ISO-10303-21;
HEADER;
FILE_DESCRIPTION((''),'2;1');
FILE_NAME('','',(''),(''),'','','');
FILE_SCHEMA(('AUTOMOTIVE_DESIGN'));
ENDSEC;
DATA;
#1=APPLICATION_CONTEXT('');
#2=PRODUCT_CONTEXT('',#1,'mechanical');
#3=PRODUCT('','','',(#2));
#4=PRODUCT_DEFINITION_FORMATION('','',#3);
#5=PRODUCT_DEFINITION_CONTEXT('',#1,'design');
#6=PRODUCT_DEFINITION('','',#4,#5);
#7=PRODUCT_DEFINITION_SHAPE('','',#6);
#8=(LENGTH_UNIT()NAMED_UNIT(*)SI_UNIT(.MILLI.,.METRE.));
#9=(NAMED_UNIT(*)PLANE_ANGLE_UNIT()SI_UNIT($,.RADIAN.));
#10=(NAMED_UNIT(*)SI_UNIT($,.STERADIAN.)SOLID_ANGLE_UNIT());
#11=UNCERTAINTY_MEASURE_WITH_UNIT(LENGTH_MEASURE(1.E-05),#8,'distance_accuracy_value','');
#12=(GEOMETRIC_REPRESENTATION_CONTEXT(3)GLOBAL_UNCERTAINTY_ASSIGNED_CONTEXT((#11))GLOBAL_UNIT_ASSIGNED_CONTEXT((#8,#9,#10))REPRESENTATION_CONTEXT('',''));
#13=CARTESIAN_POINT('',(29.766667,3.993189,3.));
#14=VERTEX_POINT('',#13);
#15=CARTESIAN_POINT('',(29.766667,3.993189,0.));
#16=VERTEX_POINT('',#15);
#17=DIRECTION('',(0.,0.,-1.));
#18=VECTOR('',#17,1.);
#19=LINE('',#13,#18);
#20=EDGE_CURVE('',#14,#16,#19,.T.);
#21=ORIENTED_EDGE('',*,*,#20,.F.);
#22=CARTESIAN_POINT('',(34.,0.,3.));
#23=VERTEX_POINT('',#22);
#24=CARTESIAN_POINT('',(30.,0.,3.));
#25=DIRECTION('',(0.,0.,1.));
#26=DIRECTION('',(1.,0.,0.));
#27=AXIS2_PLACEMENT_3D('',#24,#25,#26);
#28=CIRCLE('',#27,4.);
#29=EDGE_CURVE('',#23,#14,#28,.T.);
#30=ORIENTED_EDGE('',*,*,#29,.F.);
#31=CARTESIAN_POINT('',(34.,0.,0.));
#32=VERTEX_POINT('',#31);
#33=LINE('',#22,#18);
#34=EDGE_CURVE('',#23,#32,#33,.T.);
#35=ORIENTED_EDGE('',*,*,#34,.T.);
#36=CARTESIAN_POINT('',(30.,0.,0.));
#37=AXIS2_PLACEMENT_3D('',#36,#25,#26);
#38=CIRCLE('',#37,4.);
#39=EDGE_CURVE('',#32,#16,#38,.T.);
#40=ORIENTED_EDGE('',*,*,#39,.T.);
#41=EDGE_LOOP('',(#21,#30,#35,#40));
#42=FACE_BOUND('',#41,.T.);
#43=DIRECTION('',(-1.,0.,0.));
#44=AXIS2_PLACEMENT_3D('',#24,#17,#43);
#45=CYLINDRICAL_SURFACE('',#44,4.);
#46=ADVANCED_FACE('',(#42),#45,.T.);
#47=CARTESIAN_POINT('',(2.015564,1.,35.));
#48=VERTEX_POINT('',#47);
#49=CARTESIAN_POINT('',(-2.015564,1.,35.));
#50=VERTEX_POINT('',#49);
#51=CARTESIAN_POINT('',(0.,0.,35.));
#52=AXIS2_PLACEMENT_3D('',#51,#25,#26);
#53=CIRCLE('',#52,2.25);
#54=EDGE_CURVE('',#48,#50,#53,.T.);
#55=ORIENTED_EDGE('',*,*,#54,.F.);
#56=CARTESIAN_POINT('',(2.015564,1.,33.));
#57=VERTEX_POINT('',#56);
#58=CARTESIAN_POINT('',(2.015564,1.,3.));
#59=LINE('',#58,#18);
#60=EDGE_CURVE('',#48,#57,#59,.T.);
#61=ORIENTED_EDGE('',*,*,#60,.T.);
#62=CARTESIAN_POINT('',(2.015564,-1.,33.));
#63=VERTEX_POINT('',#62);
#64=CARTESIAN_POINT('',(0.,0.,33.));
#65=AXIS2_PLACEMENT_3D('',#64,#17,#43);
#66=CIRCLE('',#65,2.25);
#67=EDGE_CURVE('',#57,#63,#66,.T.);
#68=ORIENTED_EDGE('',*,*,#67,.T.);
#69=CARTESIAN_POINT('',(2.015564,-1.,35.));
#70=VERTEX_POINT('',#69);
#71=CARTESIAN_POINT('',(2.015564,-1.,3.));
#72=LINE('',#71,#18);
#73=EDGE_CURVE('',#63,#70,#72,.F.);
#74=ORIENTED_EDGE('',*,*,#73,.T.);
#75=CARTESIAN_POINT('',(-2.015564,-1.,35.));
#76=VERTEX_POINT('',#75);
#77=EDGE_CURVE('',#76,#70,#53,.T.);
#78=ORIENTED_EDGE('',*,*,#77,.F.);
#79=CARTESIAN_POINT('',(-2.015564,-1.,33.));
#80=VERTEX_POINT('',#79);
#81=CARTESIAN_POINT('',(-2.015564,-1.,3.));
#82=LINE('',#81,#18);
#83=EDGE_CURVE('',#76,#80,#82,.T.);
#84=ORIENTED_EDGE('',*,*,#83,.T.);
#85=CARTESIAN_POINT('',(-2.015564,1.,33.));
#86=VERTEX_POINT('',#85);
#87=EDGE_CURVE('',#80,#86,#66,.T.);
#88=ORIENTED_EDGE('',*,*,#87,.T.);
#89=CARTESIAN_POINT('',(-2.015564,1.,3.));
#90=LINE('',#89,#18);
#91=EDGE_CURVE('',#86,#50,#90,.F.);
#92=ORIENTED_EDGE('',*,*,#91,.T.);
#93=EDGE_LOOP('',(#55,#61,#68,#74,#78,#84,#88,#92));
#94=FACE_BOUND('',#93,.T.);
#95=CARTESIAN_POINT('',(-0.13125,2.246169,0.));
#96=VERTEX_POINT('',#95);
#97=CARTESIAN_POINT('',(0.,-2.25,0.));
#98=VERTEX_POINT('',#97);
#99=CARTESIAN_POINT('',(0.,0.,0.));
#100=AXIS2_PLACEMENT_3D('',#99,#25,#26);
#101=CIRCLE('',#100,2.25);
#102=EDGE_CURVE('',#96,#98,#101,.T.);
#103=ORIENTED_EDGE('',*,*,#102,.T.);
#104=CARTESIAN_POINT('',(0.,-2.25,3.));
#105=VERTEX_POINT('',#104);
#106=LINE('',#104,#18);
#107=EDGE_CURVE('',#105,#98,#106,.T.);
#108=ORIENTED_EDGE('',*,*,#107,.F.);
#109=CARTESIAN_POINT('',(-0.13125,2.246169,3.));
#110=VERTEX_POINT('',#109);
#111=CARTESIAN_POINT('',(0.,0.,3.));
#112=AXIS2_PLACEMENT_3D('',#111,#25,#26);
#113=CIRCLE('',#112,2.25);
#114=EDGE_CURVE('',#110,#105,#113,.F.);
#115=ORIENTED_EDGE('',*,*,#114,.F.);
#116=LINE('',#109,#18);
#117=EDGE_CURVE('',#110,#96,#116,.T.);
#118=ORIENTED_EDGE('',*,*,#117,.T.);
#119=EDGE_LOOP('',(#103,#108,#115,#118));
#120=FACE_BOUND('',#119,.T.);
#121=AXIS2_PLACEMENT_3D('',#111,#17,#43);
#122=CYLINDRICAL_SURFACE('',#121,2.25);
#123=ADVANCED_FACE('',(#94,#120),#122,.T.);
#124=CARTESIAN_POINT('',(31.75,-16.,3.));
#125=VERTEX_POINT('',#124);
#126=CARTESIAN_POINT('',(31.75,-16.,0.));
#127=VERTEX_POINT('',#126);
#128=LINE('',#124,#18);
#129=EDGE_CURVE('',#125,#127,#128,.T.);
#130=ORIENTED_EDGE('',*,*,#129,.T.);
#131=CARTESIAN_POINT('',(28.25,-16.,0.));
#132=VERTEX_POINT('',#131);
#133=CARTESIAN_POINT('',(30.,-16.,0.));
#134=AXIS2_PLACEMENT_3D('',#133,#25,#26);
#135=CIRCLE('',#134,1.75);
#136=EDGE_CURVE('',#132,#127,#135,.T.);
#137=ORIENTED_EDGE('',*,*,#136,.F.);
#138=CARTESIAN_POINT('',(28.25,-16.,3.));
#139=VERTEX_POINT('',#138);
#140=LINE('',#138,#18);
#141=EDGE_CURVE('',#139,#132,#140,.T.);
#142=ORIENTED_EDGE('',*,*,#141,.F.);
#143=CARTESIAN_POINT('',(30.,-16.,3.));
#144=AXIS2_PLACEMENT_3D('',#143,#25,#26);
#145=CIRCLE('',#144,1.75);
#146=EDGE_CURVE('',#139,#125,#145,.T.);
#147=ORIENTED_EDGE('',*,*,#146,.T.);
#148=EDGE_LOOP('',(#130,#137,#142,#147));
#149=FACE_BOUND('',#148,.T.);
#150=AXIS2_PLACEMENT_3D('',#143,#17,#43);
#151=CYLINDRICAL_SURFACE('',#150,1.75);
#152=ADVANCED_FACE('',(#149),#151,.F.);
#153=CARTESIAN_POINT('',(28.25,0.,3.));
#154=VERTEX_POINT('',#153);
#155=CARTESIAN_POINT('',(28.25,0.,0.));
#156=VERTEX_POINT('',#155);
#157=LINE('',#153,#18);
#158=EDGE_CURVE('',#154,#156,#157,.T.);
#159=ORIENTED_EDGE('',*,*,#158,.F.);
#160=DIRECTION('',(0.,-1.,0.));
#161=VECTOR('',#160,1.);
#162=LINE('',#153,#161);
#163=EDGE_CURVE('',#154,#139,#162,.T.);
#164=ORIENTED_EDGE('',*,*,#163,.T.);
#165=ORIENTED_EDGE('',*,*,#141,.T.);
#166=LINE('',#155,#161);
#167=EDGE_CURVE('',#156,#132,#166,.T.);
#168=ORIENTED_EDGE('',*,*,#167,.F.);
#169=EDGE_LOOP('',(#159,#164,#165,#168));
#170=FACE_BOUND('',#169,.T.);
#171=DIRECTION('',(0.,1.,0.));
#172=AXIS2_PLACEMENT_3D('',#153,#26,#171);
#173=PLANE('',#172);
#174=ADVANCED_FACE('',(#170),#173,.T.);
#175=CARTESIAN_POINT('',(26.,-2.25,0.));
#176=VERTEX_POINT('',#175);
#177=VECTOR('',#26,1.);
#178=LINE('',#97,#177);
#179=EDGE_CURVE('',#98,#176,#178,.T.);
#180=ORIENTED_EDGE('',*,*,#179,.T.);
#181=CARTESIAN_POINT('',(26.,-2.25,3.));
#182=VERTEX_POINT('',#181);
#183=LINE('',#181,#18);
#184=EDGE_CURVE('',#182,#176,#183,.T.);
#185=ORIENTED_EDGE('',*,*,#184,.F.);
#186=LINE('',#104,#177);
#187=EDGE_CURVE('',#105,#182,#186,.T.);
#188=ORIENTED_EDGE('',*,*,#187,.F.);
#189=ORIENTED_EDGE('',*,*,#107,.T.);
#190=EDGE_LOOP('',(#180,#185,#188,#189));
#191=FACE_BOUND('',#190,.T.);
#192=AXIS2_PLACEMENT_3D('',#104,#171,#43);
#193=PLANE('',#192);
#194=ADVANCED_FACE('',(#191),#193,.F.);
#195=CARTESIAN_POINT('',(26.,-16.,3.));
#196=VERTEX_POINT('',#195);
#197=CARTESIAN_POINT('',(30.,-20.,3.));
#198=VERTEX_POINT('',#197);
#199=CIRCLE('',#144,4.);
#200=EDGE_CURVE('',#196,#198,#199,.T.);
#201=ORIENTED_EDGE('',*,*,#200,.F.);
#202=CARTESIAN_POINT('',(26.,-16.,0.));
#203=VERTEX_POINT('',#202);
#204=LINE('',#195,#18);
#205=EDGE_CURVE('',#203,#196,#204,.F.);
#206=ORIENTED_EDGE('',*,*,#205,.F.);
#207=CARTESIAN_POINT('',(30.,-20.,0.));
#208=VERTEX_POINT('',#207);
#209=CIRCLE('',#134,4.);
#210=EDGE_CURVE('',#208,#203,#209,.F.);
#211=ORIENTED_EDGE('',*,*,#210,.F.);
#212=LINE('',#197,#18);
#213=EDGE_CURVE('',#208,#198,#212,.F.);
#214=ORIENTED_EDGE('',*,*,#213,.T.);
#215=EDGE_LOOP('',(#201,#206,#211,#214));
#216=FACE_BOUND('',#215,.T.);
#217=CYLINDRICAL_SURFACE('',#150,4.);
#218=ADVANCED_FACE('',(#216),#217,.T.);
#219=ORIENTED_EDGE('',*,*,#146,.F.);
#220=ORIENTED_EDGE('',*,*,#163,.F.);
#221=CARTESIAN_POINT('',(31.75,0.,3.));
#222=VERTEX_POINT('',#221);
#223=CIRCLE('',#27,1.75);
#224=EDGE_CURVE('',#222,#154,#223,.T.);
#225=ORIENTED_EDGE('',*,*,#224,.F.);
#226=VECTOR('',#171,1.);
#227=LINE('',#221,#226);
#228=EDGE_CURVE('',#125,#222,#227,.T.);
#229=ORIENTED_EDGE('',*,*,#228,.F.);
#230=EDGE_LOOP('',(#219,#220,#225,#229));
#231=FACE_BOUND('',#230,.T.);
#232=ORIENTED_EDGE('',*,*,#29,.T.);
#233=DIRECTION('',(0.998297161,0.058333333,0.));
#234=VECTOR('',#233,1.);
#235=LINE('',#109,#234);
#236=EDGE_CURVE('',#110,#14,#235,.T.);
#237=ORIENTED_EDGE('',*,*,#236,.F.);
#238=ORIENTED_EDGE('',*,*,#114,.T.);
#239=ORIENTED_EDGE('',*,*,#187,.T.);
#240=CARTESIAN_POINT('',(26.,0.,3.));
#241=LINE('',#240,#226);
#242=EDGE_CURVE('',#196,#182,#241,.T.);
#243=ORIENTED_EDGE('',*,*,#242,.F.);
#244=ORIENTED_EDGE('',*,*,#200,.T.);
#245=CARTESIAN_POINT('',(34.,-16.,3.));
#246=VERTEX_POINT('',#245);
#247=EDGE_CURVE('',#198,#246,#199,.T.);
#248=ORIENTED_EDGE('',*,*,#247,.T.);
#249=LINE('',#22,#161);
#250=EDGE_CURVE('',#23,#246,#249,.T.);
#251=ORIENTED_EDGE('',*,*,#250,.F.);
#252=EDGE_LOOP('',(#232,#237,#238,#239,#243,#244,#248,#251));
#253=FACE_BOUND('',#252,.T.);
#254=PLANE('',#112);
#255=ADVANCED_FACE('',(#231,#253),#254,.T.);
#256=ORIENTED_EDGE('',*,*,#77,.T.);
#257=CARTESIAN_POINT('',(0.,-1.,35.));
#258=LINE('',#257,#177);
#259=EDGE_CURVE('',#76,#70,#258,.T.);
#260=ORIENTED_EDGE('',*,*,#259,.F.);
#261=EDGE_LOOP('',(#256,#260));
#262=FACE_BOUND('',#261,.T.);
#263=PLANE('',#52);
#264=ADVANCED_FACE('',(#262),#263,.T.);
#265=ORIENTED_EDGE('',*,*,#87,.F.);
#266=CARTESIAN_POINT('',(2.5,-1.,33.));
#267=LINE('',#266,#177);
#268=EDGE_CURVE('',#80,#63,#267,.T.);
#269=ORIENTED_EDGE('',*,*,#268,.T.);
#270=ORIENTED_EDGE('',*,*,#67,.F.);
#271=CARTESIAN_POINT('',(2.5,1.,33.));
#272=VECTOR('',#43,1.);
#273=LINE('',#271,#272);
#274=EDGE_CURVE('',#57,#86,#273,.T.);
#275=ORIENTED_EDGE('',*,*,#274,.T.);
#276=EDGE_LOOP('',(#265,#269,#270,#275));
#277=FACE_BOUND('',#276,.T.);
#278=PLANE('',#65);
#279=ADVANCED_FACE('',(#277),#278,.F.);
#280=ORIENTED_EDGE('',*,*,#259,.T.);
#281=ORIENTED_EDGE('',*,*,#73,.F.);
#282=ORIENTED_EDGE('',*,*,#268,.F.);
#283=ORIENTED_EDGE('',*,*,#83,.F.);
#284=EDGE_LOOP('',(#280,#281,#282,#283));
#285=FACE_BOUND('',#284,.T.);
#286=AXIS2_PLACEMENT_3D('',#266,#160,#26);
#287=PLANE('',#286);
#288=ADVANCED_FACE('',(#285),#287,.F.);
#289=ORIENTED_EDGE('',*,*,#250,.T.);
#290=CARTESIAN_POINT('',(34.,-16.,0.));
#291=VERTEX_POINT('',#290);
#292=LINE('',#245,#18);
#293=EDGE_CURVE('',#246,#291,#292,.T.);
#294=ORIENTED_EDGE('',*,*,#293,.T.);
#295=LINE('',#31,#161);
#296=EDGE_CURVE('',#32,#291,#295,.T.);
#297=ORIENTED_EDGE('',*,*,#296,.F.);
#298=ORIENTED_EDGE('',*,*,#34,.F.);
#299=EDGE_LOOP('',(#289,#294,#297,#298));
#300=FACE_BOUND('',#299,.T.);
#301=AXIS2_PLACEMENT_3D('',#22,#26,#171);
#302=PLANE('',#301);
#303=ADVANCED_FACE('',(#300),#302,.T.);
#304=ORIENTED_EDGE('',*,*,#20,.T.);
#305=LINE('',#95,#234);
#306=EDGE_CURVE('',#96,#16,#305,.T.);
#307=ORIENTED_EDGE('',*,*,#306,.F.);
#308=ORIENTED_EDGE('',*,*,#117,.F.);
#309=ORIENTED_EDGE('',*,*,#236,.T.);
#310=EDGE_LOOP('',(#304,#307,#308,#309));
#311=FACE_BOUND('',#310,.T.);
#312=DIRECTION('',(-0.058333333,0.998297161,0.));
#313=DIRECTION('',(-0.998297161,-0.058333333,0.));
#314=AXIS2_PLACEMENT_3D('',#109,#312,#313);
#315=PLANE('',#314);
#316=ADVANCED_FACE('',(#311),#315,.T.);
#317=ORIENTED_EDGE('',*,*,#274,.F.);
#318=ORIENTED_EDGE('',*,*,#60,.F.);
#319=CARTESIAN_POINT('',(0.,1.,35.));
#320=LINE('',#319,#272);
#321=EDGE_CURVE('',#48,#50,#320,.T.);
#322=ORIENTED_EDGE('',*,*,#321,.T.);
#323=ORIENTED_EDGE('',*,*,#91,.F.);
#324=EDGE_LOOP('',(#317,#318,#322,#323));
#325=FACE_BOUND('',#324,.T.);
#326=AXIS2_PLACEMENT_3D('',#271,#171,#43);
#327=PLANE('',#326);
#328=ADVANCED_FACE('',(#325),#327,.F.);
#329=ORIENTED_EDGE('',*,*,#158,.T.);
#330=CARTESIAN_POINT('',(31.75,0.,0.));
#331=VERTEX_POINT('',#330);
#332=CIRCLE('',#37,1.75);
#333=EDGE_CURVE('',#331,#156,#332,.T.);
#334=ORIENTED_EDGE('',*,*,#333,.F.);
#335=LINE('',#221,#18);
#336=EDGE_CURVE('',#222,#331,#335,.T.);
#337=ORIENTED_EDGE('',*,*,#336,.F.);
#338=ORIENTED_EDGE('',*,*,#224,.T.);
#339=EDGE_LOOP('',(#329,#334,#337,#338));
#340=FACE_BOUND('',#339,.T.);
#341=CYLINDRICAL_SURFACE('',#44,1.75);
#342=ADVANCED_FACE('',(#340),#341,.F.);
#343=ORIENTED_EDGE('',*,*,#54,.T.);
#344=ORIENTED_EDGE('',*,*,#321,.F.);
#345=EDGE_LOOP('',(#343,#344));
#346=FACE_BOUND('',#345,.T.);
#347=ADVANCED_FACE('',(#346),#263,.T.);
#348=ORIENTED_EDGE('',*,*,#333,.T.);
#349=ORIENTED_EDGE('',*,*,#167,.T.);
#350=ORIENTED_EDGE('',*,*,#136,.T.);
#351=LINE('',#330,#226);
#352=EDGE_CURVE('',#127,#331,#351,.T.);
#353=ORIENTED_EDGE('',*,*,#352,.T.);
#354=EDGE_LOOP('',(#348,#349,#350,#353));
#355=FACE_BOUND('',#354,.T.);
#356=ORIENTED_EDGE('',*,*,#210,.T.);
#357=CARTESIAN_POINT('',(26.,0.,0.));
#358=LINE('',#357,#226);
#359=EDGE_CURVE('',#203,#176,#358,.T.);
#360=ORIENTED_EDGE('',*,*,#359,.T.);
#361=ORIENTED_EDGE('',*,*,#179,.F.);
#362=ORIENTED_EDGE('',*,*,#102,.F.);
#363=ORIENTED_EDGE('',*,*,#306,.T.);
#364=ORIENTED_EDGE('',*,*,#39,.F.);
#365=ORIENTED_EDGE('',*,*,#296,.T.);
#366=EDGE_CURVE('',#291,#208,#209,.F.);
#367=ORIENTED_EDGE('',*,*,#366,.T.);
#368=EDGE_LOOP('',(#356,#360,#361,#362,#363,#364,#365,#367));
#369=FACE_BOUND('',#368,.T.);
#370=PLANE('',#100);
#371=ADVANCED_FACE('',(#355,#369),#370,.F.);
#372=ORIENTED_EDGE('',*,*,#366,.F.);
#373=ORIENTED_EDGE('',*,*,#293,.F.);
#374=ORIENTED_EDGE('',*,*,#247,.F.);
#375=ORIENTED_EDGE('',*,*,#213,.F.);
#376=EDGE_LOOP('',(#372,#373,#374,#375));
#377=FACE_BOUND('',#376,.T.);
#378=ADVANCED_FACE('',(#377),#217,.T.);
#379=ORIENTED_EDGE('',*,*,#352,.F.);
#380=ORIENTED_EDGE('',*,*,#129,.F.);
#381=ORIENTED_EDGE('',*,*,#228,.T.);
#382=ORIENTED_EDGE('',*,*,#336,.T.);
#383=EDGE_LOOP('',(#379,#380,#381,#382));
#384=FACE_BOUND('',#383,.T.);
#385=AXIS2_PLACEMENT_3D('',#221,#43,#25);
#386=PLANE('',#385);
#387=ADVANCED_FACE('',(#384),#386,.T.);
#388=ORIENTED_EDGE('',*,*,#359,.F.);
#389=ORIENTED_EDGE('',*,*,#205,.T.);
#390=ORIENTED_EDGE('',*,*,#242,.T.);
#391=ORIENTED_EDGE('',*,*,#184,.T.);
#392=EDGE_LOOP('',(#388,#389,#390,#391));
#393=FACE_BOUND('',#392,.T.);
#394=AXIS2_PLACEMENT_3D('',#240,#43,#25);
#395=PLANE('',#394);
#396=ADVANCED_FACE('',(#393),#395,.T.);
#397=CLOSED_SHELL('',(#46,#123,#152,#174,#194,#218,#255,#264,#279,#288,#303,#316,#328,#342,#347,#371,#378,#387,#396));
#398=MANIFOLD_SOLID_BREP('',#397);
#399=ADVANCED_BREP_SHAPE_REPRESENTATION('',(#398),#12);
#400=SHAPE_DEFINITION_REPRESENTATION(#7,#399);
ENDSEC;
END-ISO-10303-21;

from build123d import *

# Parameters (mm, degrees)
EXTRUDE_1_DEPTH     = 3
SKETCH_1_3_R        = 2.25
EXTRUDE_2_DEPTH     = 35
SKETCH_2_W          = 5
SKETCH_2_H          = 2
CUT_EXTRUDE_1_DEPTH = 2
FILLET_1_R          = 4


with BuildPart() as part:
    # 草图1 → 凸台-拉伸1 (new body)
    with BuildSketch(Plane.XY):
        with BuildLine():
            Line((29.766666667, 3.993188645), (-0.13125, 2.246168613))
            ThreePointArc((-0.13125, 2.246168613), (-2.249041949, -0.065652955), (0, -2.25))
            Line((0, -2.25), (26, -2.25))
            Line((26, -2.25), (26, -20))
            Line((26, -20), (34, -20))
            Line((34, -20), (34, 0))
            ThreePointArc((34, 0), (32.744691847, 2.909753712), (29.766666667, 3.993188645))
        make_face()
        with BuildLine():
            Line((28.25, -16), (28.25, 0))
            ThreePointArc((28.25, 0), (30, 1.75), (31.75, 0))
            Line((31.75, 0), (31.75, -16))
            ThreePointArc((31.75, -16), (30, -17.75), (28.25, -16))
        make_face(mode=Mode.SUBTRACT)
    extrude(amount=EXTRUDE_1_DEPTH)

    # 草图1<3> → 凸台-拉伸2 (add)
    with BuildSketch(Plane.XY):
        with Locations(Location((0, 0, 0), (0, 0, 93.344152204))):
            Circle(SKETCH_1_3_R)
    extrude(amount=EXTRUDE_2_DEPTH)

    # 草图2 → 切除-拉伸1 (cut)
    with BuildSketch(Plane.XY.offset(35)):
        Rectangle(SKETCH_2_W, SKETCH_2_H)
    extrude(amount=-CUT_EXTRUDE_1_DEPTH, mode=Mode.SUBTRACT)

    # 圆角1
    fillet_1_edges = [part.edges().sort_by_distance(p)[0] for p in [
        (26, -20, 1.5),
        (34, -20, 1.5),
    ]]
    fillet(fillet_1_edges, radius=FILLET_1_R - 0.0001)  # a hair under: the kernel refuses the full size


solid = part.part
